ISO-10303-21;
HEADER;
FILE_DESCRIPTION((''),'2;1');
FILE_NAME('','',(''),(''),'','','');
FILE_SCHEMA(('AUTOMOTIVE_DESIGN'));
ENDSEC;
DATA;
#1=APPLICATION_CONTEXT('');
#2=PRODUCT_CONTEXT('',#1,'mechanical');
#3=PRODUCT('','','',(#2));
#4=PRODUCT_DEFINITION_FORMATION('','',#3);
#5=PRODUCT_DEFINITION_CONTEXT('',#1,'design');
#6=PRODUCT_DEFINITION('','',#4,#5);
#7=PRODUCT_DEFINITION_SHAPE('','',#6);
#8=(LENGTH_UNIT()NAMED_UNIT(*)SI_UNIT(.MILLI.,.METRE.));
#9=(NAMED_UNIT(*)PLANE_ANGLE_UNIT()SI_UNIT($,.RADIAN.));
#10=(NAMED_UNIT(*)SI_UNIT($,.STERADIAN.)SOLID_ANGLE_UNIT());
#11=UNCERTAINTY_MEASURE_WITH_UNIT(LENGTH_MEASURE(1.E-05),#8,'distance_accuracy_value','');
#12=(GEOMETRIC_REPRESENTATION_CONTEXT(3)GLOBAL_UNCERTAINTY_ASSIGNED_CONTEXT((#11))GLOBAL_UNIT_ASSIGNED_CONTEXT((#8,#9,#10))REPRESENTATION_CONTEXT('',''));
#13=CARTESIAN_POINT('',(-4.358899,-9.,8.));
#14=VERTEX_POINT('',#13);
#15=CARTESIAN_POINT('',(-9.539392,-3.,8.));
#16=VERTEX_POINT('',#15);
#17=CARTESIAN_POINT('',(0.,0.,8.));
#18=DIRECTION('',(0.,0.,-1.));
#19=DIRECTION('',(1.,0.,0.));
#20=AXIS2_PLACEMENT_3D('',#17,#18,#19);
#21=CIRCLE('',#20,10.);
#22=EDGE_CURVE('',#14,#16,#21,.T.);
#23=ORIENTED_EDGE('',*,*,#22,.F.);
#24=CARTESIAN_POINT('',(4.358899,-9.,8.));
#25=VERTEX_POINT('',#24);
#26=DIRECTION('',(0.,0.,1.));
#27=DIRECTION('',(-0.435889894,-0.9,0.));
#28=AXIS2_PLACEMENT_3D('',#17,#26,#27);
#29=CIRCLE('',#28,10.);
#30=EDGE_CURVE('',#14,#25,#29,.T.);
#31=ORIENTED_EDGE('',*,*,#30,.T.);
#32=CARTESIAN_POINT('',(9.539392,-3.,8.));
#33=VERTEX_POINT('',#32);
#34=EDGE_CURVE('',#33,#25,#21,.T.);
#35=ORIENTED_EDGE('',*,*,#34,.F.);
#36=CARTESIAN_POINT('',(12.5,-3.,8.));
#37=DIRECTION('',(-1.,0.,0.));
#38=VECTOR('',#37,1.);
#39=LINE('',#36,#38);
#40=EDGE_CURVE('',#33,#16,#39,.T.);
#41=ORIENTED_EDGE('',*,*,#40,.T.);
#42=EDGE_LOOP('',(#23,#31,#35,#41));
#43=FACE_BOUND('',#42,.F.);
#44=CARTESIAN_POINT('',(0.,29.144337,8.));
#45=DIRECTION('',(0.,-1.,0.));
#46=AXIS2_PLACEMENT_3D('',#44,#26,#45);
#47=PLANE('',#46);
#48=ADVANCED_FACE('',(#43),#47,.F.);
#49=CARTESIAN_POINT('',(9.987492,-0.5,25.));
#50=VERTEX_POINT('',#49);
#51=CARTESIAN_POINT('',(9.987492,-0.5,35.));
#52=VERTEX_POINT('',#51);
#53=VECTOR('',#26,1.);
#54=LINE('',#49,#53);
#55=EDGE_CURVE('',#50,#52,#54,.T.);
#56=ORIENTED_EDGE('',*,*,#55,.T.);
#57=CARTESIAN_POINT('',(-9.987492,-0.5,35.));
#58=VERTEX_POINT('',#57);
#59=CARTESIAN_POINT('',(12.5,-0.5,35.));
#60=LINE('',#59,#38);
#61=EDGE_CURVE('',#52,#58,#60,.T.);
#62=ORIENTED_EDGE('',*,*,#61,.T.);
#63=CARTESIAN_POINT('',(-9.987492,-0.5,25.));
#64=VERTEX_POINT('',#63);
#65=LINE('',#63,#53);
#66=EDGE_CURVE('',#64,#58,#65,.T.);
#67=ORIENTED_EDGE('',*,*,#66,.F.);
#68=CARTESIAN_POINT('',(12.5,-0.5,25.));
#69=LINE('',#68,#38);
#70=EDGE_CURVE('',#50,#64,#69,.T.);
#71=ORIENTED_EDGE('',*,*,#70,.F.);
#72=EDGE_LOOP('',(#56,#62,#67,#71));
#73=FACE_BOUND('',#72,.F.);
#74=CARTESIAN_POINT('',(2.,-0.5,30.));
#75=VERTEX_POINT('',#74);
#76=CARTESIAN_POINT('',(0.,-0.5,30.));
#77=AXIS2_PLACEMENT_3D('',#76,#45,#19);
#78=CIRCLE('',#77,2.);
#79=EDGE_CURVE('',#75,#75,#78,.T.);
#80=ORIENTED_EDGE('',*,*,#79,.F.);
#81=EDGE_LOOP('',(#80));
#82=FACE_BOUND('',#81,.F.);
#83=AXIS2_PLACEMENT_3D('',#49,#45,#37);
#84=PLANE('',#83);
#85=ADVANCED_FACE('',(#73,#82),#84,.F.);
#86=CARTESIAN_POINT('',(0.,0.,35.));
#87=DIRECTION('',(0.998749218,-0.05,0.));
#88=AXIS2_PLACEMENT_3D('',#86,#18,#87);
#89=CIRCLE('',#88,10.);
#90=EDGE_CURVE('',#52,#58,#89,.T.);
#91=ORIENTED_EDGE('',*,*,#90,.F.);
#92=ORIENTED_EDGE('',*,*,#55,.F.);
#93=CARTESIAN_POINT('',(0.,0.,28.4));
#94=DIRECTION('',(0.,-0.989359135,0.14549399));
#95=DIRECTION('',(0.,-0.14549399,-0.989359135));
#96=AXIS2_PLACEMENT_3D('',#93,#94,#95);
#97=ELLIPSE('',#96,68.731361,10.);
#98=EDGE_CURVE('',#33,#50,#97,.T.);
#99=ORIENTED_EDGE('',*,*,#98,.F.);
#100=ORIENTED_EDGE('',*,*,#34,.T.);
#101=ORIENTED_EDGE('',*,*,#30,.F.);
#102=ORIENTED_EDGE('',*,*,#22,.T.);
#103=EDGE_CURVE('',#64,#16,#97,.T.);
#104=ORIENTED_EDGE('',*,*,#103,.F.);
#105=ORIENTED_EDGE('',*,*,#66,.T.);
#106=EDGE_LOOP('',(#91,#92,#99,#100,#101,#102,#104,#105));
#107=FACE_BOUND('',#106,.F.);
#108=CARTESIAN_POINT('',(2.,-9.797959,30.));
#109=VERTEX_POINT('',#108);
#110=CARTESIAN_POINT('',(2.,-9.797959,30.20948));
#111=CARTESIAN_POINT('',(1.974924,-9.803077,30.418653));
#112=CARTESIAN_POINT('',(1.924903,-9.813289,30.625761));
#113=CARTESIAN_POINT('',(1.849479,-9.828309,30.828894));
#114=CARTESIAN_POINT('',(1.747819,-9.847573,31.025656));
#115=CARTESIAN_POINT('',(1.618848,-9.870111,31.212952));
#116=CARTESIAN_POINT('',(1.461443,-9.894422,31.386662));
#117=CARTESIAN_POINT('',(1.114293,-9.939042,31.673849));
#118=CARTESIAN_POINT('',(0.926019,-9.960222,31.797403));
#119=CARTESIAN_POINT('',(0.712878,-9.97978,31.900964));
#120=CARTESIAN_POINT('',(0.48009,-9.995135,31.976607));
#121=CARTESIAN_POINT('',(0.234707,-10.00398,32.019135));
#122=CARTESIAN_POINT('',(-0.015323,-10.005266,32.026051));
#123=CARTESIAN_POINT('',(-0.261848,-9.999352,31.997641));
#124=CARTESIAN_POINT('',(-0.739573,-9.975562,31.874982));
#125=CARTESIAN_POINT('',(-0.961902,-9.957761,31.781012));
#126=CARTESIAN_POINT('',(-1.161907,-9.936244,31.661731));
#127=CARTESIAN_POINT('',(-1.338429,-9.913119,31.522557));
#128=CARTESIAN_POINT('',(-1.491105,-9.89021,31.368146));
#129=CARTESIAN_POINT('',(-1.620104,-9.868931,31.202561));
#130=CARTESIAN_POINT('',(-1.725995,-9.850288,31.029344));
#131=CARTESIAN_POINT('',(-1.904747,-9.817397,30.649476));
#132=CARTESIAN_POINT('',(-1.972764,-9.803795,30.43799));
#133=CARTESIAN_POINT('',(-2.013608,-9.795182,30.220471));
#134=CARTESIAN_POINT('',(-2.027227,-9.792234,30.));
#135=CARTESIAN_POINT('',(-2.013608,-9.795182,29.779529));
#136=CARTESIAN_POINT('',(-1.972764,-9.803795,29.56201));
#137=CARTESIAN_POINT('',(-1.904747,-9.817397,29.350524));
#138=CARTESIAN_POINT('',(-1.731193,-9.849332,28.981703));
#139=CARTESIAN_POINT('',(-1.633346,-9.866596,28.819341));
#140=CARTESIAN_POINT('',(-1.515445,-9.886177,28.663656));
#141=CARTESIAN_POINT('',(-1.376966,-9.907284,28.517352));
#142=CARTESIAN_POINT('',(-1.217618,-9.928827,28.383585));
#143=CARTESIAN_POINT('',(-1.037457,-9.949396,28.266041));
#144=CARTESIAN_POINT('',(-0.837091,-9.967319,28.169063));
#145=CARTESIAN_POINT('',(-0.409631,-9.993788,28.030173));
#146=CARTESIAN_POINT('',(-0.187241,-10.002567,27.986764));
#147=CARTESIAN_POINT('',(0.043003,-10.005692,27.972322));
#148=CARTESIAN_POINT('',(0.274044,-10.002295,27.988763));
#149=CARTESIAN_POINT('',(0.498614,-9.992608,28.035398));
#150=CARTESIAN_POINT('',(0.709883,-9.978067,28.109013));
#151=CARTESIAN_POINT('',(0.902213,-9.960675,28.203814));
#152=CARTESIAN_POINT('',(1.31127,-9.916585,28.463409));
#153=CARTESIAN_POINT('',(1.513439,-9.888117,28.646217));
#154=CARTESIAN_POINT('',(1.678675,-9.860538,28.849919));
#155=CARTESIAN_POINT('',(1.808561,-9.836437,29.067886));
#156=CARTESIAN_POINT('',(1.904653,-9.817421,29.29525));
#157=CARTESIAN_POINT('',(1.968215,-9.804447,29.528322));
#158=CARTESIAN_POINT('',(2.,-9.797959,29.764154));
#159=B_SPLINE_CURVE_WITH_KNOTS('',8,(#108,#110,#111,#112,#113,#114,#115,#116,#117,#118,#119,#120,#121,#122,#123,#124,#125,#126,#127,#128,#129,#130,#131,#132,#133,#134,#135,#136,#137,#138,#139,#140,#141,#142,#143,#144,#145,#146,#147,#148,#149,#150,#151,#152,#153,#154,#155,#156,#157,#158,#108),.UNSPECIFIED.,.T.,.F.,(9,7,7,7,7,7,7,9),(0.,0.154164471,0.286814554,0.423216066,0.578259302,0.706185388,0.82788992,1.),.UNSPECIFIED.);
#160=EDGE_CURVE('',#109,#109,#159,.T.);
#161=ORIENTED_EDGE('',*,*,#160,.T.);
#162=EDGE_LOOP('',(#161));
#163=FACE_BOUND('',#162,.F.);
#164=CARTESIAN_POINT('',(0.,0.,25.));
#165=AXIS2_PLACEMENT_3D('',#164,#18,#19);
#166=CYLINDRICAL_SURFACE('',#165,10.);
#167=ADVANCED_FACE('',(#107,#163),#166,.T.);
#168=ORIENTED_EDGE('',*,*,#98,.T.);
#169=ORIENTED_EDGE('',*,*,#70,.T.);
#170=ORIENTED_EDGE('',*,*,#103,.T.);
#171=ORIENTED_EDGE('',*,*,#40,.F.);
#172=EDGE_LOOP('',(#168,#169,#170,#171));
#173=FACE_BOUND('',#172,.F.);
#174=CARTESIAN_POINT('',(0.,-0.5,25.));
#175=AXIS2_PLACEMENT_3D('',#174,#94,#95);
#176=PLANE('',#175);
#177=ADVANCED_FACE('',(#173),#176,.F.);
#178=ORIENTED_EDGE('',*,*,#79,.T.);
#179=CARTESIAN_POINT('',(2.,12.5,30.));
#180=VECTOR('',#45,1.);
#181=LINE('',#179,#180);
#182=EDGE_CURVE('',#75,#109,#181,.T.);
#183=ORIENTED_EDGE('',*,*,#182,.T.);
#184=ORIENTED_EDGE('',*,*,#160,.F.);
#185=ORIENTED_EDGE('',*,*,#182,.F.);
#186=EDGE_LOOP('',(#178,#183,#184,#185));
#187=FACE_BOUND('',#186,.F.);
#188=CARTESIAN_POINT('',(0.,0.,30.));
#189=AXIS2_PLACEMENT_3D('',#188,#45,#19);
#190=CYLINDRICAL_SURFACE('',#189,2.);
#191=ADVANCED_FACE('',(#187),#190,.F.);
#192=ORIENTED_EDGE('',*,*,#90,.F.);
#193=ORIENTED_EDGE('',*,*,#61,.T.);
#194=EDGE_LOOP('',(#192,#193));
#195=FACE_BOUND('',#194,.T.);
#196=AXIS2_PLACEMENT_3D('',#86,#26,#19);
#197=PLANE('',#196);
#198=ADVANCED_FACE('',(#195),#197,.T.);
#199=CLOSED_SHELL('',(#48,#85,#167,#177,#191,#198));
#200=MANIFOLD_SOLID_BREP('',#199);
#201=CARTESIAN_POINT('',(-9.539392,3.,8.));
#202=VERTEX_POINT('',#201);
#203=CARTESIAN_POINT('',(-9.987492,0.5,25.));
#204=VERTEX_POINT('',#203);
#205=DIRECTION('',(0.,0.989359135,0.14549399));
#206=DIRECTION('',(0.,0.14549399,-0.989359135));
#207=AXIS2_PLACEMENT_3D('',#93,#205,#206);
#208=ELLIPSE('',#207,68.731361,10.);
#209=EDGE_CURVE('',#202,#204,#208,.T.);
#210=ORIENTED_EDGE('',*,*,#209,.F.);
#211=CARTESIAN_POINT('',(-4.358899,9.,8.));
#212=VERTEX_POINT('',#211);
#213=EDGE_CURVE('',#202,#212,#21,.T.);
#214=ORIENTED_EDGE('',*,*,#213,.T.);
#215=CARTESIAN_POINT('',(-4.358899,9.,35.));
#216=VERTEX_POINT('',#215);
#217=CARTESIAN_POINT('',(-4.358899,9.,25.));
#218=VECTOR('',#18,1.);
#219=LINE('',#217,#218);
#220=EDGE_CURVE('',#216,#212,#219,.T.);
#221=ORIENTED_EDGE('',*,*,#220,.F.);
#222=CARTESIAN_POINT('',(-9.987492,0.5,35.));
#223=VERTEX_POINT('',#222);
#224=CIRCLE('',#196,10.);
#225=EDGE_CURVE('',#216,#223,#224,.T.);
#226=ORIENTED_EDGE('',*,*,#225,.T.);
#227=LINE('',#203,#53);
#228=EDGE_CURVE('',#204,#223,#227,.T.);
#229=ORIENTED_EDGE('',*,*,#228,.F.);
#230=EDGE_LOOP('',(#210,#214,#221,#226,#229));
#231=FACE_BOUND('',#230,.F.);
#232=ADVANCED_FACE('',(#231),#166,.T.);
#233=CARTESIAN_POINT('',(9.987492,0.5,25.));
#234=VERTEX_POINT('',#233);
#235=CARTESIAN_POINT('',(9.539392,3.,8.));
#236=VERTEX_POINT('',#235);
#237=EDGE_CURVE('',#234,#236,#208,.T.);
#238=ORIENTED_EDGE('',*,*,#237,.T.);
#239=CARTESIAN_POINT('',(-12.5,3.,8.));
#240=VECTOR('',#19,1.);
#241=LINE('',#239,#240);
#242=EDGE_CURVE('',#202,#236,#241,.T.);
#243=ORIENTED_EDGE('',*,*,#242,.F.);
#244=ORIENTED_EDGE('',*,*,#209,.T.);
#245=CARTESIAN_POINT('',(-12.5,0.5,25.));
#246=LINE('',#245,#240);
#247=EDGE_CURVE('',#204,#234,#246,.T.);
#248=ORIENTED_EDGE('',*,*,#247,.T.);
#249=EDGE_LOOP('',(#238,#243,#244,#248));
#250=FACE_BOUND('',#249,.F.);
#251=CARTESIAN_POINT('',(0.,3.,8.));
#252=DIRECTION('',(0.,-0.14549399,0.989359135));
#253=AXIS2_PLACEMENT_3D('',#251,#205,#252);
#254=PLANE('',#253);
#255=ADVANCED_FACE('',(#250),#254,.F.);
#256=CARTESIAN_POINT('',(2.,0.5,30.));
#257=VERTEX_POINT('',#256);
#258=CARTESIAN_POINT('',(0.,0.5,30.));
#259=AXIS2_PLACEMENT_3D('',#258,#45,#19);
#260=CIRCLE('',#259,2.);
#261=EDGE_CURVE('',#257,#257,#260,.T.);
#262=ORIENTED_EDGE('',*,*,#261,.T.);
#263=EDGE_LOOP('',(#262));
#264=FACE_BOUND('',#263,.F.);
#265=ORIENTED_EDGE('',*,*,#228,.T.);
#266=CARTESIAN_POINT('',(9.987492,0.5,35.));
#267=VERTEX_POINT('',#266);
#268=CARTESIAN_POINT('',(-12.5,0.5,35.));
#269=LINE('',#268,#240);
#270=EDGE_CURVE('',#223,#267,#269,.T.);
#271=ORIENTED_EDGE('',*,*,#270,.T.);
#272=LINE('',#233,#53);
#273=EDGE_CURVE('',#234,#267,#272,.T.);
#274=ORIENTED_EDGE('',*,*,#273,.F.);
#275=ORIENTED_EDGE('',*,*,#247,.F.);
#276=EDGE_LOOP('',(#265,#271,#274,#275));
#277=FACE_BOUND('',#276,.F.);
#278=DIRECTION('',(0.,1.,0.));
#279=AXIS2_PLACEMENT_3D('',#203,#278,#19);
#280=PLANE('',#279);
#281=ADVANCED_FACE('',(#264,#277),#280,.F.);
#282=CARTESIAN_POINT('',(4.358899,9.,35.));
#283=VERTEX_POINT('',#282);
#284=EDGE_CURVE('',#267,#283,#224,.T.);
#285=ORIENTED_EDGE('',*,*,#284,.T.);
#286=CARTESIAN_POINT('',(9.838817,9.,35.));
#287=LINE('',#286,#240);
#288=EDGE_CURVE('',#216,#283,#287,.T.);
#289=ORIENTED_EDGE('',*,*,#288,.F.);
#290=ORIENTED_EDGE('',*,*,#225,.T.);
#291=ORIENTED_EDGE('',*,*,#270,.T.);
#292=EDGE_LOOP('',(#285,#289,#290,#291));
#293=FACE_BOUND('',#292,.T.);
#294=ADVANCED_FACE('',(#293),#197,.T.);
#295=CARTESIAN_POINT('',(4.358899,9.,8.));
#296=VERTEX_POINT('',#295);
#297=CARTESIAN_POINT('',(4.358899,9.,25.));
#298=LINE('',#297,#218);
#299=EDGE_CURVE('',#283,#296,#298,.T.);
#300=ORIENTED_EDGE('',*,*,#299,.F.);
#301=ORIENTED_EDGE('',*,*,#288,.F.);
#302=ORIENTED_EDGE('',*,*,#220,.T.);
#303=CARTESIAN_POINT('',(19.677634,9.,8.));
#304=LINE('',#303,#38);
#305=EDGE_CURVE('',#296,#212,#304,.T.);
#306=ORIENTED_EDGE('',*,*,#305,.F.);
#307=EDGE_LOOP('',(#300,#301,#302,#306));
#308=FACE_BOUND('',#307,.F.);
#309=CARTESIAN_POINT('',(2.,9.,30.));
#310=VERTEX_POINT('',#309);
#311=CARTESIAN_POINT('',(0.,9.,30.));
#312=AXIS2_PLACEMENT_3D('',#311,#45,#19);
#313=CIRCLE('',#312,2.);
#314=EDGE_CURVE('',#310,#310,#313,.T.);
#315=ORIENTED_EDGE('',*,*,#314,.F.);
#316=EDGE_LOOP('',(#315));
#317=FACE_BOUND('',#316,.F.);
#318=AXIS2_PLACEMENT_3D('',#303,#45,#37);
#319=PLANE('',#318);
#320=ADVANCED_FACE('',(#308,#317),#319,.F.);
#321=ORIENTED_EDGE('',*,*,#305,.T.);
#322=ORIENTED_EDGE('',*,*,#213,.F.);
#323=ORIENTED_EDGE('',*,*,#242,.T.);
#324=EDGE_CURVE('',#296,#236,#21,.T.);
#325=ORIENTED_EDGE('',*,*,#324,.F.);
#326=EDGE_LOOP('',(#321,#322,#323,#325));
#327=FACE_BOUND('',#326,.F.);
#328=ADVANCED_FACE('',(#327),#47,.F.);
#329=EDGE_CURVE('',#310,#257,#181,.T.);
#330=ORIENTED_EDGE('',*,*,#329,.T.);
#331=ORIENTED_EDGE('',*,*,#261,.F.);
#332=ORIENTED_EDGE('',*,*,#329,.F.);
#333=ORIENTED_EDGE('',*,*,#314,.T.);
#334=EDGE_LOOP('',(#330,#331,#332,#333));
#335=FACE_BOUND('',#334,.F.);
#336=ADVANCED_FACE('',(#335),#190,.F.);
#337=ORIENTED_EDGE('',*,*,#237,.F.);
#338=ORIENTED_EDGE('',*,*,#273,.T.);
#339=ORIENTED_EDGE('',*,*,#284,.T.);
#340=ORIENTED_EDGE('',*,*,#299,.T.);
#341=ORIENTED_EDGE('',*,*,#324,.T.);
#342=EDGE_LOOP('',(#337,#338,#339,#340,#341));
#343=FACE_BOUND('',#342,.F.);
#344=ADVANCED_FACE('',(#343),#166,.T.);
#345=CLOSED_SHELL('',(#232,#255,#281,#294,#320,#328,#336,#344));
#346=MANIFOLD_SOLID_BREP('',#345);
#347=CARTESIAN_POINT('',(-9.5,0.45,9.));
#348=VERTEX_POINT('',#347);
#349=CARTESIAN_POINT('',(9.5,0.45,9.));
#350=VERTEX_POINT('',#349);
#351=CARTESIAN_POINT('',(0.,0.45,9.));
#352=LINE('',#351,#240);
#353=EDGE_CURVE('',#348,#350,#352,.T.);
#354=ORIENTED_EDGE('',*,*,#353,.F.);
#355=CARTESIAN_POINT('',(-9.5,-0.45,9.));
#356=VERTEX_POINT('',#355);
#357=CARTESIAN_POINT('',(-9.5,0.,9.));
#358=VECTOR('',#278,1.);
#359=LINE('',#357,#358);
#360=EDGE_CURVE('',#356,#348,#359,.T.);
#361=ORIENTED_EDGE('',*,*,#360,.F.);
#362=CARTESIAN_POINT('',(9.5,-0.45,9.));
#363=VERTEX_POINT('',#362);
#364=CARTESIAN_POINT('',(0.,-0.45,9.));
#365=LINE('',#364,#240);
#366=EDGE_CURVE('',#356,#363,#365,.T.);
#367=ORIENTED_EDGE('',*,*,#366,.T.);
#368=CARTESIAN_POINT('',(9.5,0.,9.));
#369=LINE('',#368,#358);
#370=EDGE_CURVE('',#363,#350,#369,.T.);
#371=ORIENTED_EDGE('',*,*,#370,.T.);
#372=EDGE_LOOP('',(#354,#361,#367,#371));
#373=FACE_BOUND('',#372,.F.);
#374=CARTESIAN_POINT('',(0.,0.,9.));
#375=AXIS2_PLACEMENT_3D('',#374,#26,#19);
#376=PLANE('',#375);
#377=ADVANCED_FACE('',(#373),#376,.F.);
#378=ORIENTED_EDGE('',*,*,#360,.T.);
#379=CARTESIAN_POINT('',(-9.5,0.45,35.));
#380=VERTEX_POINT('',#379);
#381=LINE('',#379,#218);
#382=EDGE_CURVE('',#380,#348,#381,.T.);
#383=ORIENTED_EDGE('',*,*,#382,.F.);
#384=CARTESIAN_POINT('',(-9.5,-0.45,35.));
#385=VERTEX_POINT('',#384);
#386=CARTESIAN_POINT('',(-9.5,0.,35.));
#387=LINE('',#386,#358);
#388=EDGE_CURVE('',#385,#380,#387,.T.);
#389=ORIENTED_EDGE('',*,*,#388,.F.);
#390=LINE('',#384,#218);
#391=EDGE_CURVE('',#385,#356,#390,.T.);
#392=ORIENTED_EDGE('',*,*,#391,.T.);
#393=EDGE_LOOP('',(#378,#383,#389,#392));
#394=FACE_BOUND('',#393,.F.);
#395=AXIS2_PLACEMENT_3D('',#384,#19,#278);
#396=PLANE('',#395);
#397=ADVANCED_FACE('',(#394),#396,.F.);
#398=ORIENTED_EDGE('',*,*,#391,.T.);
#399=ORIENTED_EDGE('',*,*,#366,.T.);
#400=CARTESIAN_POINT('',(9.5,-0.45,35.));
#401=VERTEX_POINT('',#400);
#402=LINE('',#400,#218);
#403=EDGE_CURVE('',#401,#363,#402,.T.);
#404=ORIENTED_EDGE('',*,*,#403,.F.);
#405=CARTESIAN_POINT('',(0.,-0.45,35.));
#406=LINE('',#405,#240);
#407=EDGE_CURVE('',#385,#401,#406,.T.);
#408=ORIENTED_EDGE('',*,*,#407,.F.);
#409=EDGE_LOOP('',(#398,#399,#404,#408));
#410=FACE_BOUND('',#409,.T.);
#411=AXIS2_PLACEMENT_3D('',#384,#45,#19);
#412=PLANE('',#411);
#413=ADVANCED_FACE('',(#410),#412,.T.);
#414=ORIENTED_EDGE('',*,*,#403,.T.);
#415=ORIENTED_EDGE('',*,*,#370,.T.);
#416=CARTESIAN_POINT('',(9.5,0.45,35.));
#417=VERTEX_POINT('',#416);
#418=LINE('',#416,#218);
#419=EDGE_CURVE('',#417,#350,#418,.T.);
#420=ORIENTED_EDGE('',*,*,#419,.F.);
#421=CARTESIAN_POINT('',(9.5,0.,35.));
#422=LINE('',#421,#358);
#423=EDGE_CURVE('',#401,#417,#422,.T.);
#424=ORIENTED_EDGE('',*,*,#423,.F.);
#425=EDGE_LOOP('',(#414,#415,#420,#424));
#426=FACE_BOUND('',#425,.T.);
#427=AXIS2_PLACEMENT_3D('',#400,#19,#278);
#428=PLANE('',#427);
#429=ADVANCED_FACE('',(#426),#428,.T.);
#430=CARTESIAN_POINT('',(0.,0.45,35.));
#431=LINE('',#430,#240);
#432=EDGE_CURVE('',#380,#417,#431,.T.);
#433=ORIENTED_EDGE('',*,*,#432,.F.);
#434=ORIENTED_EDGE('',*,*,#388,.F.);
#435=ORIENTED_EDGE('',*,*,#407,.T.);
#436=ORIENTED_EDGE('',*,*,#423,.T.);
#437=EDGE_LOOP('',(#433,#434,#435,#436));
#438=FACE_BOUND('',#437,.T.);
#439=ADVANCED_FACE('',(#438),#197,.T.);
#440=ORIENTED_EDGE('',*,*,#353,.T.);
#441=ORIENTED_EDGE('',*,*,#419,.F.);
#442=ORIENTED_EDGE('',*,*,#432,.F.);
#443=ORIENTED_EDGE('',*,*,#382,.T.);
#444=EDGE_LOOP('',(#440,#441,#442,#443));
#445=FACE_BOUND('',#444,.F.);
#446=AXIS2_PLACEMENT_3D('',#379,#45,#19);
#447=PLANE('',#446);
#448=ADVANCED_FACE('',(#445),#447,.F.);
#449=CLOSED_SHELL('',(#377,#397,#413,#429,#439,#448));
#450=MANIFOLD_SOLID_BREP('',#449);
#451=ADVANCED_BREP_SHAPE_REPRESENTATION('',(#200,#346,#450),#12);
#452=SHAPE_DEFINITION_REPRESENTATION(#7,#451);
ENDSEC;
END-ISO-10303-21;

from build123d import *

# Parameters (mm, degrees)
F0_R      = 10
F1_DEPTH  = 25
F3_DEPTH  = 12.5
F4_DEPTH  = 10
F6_DEPTH  = 12.5
F7_R      = 2
F8_DEPTH  = 12.5
F9_W      = 19
F9_H      = 0.9
F10_DEPTH = 26
F11_W     = 62.5739917159
F11_H     = 29.2480699718
F12_DEPTH = 30


with BuildPart() as f1:
    # F0 (on Top) → F1 (new body)
    with BuildSketch(Plane.XY):
        Circle(F0_R)
    extrude(amount=F1_DEPTH)

    # F2 (on Right) → F3 (cut, symmetric)
    with BuildSketch(Plane.YZ):
        Polygon((-3, 8), (3, 8), (0.5, 25), (-0.5, 25), align=None)
    extrude(amount=F3_DEPTH, both=True, mode=Mode.SUBTRACT)

    # F4 (add): faces of the model
    f4_faces = [f1.faces().sort_by_distance(p)[0] for p in [
        (0, 4.5155770092, 25),
        (0, -4.5155770092, 25),
    ]]
    extrude(f4_faces, amount=F4_DEPTH)

    # F5 (on Right) → F6 (cut, symmetric)
    with BuildSketch(Plane.YZ):
        Polygon((29.1443374008, 8), (-21.5125791728, 8), (-21.9593886286, -11.827128388), (29.8704002053, -10.9335111063), align=None)
    extrude(amount=F6_DEPTH, both=True, mode=Mode.SUBTRACT)

    # F7 (on Front) → F8 (cut, symmetric)
    with BuildSketch(Plane.XZ):
        with Locations((0, 30)):
            Circle(F7_R)
    extrude(amount=F8_DEPTH, both=True, mode=Mode.SUBTRACT)

    # F11 (on face) → F12 (cut)
    with BuildSketch(Plane(origin=(0, 0, 8), x_dir=(1, 0, 0), z_dir=(0, 0, -1))):
        with Locations((3.5222135484, 0.1944573596)):
            Rectangle(F11_W, F11_H)
        with BuildLine():
            Line((19.6776342417, -9), (-17.8668759763, -9))
            Line((-17.8668759763, -9), (-17.8668759763, 9))
            Line((-17.8668759763, 9), (-4.3588989435, 9))
            ThreePointArc((-4.3588989435, 9), (0, 10), (4.3588989435, 9))
            Line((4.3588989435, 9), (19.6776342417, 9))
            Line((19.6776342417, 9), (19.6776342417, -9))
        make_face(mode=Mode.SUBTRACT)
    extrude(amount=-F12_DEPTH, mode=Mode.SUBTRACT)


with BuildPart() as f10:
    # F9 (on face) → F10 (new body)
    with BuildSketch(Plane.XY.offset(35)):
        Rectangle(F9_W, F9_H)
    extrude(amount=-F10_DEPTH)


solid = Compound([f1.part, f10.part])
